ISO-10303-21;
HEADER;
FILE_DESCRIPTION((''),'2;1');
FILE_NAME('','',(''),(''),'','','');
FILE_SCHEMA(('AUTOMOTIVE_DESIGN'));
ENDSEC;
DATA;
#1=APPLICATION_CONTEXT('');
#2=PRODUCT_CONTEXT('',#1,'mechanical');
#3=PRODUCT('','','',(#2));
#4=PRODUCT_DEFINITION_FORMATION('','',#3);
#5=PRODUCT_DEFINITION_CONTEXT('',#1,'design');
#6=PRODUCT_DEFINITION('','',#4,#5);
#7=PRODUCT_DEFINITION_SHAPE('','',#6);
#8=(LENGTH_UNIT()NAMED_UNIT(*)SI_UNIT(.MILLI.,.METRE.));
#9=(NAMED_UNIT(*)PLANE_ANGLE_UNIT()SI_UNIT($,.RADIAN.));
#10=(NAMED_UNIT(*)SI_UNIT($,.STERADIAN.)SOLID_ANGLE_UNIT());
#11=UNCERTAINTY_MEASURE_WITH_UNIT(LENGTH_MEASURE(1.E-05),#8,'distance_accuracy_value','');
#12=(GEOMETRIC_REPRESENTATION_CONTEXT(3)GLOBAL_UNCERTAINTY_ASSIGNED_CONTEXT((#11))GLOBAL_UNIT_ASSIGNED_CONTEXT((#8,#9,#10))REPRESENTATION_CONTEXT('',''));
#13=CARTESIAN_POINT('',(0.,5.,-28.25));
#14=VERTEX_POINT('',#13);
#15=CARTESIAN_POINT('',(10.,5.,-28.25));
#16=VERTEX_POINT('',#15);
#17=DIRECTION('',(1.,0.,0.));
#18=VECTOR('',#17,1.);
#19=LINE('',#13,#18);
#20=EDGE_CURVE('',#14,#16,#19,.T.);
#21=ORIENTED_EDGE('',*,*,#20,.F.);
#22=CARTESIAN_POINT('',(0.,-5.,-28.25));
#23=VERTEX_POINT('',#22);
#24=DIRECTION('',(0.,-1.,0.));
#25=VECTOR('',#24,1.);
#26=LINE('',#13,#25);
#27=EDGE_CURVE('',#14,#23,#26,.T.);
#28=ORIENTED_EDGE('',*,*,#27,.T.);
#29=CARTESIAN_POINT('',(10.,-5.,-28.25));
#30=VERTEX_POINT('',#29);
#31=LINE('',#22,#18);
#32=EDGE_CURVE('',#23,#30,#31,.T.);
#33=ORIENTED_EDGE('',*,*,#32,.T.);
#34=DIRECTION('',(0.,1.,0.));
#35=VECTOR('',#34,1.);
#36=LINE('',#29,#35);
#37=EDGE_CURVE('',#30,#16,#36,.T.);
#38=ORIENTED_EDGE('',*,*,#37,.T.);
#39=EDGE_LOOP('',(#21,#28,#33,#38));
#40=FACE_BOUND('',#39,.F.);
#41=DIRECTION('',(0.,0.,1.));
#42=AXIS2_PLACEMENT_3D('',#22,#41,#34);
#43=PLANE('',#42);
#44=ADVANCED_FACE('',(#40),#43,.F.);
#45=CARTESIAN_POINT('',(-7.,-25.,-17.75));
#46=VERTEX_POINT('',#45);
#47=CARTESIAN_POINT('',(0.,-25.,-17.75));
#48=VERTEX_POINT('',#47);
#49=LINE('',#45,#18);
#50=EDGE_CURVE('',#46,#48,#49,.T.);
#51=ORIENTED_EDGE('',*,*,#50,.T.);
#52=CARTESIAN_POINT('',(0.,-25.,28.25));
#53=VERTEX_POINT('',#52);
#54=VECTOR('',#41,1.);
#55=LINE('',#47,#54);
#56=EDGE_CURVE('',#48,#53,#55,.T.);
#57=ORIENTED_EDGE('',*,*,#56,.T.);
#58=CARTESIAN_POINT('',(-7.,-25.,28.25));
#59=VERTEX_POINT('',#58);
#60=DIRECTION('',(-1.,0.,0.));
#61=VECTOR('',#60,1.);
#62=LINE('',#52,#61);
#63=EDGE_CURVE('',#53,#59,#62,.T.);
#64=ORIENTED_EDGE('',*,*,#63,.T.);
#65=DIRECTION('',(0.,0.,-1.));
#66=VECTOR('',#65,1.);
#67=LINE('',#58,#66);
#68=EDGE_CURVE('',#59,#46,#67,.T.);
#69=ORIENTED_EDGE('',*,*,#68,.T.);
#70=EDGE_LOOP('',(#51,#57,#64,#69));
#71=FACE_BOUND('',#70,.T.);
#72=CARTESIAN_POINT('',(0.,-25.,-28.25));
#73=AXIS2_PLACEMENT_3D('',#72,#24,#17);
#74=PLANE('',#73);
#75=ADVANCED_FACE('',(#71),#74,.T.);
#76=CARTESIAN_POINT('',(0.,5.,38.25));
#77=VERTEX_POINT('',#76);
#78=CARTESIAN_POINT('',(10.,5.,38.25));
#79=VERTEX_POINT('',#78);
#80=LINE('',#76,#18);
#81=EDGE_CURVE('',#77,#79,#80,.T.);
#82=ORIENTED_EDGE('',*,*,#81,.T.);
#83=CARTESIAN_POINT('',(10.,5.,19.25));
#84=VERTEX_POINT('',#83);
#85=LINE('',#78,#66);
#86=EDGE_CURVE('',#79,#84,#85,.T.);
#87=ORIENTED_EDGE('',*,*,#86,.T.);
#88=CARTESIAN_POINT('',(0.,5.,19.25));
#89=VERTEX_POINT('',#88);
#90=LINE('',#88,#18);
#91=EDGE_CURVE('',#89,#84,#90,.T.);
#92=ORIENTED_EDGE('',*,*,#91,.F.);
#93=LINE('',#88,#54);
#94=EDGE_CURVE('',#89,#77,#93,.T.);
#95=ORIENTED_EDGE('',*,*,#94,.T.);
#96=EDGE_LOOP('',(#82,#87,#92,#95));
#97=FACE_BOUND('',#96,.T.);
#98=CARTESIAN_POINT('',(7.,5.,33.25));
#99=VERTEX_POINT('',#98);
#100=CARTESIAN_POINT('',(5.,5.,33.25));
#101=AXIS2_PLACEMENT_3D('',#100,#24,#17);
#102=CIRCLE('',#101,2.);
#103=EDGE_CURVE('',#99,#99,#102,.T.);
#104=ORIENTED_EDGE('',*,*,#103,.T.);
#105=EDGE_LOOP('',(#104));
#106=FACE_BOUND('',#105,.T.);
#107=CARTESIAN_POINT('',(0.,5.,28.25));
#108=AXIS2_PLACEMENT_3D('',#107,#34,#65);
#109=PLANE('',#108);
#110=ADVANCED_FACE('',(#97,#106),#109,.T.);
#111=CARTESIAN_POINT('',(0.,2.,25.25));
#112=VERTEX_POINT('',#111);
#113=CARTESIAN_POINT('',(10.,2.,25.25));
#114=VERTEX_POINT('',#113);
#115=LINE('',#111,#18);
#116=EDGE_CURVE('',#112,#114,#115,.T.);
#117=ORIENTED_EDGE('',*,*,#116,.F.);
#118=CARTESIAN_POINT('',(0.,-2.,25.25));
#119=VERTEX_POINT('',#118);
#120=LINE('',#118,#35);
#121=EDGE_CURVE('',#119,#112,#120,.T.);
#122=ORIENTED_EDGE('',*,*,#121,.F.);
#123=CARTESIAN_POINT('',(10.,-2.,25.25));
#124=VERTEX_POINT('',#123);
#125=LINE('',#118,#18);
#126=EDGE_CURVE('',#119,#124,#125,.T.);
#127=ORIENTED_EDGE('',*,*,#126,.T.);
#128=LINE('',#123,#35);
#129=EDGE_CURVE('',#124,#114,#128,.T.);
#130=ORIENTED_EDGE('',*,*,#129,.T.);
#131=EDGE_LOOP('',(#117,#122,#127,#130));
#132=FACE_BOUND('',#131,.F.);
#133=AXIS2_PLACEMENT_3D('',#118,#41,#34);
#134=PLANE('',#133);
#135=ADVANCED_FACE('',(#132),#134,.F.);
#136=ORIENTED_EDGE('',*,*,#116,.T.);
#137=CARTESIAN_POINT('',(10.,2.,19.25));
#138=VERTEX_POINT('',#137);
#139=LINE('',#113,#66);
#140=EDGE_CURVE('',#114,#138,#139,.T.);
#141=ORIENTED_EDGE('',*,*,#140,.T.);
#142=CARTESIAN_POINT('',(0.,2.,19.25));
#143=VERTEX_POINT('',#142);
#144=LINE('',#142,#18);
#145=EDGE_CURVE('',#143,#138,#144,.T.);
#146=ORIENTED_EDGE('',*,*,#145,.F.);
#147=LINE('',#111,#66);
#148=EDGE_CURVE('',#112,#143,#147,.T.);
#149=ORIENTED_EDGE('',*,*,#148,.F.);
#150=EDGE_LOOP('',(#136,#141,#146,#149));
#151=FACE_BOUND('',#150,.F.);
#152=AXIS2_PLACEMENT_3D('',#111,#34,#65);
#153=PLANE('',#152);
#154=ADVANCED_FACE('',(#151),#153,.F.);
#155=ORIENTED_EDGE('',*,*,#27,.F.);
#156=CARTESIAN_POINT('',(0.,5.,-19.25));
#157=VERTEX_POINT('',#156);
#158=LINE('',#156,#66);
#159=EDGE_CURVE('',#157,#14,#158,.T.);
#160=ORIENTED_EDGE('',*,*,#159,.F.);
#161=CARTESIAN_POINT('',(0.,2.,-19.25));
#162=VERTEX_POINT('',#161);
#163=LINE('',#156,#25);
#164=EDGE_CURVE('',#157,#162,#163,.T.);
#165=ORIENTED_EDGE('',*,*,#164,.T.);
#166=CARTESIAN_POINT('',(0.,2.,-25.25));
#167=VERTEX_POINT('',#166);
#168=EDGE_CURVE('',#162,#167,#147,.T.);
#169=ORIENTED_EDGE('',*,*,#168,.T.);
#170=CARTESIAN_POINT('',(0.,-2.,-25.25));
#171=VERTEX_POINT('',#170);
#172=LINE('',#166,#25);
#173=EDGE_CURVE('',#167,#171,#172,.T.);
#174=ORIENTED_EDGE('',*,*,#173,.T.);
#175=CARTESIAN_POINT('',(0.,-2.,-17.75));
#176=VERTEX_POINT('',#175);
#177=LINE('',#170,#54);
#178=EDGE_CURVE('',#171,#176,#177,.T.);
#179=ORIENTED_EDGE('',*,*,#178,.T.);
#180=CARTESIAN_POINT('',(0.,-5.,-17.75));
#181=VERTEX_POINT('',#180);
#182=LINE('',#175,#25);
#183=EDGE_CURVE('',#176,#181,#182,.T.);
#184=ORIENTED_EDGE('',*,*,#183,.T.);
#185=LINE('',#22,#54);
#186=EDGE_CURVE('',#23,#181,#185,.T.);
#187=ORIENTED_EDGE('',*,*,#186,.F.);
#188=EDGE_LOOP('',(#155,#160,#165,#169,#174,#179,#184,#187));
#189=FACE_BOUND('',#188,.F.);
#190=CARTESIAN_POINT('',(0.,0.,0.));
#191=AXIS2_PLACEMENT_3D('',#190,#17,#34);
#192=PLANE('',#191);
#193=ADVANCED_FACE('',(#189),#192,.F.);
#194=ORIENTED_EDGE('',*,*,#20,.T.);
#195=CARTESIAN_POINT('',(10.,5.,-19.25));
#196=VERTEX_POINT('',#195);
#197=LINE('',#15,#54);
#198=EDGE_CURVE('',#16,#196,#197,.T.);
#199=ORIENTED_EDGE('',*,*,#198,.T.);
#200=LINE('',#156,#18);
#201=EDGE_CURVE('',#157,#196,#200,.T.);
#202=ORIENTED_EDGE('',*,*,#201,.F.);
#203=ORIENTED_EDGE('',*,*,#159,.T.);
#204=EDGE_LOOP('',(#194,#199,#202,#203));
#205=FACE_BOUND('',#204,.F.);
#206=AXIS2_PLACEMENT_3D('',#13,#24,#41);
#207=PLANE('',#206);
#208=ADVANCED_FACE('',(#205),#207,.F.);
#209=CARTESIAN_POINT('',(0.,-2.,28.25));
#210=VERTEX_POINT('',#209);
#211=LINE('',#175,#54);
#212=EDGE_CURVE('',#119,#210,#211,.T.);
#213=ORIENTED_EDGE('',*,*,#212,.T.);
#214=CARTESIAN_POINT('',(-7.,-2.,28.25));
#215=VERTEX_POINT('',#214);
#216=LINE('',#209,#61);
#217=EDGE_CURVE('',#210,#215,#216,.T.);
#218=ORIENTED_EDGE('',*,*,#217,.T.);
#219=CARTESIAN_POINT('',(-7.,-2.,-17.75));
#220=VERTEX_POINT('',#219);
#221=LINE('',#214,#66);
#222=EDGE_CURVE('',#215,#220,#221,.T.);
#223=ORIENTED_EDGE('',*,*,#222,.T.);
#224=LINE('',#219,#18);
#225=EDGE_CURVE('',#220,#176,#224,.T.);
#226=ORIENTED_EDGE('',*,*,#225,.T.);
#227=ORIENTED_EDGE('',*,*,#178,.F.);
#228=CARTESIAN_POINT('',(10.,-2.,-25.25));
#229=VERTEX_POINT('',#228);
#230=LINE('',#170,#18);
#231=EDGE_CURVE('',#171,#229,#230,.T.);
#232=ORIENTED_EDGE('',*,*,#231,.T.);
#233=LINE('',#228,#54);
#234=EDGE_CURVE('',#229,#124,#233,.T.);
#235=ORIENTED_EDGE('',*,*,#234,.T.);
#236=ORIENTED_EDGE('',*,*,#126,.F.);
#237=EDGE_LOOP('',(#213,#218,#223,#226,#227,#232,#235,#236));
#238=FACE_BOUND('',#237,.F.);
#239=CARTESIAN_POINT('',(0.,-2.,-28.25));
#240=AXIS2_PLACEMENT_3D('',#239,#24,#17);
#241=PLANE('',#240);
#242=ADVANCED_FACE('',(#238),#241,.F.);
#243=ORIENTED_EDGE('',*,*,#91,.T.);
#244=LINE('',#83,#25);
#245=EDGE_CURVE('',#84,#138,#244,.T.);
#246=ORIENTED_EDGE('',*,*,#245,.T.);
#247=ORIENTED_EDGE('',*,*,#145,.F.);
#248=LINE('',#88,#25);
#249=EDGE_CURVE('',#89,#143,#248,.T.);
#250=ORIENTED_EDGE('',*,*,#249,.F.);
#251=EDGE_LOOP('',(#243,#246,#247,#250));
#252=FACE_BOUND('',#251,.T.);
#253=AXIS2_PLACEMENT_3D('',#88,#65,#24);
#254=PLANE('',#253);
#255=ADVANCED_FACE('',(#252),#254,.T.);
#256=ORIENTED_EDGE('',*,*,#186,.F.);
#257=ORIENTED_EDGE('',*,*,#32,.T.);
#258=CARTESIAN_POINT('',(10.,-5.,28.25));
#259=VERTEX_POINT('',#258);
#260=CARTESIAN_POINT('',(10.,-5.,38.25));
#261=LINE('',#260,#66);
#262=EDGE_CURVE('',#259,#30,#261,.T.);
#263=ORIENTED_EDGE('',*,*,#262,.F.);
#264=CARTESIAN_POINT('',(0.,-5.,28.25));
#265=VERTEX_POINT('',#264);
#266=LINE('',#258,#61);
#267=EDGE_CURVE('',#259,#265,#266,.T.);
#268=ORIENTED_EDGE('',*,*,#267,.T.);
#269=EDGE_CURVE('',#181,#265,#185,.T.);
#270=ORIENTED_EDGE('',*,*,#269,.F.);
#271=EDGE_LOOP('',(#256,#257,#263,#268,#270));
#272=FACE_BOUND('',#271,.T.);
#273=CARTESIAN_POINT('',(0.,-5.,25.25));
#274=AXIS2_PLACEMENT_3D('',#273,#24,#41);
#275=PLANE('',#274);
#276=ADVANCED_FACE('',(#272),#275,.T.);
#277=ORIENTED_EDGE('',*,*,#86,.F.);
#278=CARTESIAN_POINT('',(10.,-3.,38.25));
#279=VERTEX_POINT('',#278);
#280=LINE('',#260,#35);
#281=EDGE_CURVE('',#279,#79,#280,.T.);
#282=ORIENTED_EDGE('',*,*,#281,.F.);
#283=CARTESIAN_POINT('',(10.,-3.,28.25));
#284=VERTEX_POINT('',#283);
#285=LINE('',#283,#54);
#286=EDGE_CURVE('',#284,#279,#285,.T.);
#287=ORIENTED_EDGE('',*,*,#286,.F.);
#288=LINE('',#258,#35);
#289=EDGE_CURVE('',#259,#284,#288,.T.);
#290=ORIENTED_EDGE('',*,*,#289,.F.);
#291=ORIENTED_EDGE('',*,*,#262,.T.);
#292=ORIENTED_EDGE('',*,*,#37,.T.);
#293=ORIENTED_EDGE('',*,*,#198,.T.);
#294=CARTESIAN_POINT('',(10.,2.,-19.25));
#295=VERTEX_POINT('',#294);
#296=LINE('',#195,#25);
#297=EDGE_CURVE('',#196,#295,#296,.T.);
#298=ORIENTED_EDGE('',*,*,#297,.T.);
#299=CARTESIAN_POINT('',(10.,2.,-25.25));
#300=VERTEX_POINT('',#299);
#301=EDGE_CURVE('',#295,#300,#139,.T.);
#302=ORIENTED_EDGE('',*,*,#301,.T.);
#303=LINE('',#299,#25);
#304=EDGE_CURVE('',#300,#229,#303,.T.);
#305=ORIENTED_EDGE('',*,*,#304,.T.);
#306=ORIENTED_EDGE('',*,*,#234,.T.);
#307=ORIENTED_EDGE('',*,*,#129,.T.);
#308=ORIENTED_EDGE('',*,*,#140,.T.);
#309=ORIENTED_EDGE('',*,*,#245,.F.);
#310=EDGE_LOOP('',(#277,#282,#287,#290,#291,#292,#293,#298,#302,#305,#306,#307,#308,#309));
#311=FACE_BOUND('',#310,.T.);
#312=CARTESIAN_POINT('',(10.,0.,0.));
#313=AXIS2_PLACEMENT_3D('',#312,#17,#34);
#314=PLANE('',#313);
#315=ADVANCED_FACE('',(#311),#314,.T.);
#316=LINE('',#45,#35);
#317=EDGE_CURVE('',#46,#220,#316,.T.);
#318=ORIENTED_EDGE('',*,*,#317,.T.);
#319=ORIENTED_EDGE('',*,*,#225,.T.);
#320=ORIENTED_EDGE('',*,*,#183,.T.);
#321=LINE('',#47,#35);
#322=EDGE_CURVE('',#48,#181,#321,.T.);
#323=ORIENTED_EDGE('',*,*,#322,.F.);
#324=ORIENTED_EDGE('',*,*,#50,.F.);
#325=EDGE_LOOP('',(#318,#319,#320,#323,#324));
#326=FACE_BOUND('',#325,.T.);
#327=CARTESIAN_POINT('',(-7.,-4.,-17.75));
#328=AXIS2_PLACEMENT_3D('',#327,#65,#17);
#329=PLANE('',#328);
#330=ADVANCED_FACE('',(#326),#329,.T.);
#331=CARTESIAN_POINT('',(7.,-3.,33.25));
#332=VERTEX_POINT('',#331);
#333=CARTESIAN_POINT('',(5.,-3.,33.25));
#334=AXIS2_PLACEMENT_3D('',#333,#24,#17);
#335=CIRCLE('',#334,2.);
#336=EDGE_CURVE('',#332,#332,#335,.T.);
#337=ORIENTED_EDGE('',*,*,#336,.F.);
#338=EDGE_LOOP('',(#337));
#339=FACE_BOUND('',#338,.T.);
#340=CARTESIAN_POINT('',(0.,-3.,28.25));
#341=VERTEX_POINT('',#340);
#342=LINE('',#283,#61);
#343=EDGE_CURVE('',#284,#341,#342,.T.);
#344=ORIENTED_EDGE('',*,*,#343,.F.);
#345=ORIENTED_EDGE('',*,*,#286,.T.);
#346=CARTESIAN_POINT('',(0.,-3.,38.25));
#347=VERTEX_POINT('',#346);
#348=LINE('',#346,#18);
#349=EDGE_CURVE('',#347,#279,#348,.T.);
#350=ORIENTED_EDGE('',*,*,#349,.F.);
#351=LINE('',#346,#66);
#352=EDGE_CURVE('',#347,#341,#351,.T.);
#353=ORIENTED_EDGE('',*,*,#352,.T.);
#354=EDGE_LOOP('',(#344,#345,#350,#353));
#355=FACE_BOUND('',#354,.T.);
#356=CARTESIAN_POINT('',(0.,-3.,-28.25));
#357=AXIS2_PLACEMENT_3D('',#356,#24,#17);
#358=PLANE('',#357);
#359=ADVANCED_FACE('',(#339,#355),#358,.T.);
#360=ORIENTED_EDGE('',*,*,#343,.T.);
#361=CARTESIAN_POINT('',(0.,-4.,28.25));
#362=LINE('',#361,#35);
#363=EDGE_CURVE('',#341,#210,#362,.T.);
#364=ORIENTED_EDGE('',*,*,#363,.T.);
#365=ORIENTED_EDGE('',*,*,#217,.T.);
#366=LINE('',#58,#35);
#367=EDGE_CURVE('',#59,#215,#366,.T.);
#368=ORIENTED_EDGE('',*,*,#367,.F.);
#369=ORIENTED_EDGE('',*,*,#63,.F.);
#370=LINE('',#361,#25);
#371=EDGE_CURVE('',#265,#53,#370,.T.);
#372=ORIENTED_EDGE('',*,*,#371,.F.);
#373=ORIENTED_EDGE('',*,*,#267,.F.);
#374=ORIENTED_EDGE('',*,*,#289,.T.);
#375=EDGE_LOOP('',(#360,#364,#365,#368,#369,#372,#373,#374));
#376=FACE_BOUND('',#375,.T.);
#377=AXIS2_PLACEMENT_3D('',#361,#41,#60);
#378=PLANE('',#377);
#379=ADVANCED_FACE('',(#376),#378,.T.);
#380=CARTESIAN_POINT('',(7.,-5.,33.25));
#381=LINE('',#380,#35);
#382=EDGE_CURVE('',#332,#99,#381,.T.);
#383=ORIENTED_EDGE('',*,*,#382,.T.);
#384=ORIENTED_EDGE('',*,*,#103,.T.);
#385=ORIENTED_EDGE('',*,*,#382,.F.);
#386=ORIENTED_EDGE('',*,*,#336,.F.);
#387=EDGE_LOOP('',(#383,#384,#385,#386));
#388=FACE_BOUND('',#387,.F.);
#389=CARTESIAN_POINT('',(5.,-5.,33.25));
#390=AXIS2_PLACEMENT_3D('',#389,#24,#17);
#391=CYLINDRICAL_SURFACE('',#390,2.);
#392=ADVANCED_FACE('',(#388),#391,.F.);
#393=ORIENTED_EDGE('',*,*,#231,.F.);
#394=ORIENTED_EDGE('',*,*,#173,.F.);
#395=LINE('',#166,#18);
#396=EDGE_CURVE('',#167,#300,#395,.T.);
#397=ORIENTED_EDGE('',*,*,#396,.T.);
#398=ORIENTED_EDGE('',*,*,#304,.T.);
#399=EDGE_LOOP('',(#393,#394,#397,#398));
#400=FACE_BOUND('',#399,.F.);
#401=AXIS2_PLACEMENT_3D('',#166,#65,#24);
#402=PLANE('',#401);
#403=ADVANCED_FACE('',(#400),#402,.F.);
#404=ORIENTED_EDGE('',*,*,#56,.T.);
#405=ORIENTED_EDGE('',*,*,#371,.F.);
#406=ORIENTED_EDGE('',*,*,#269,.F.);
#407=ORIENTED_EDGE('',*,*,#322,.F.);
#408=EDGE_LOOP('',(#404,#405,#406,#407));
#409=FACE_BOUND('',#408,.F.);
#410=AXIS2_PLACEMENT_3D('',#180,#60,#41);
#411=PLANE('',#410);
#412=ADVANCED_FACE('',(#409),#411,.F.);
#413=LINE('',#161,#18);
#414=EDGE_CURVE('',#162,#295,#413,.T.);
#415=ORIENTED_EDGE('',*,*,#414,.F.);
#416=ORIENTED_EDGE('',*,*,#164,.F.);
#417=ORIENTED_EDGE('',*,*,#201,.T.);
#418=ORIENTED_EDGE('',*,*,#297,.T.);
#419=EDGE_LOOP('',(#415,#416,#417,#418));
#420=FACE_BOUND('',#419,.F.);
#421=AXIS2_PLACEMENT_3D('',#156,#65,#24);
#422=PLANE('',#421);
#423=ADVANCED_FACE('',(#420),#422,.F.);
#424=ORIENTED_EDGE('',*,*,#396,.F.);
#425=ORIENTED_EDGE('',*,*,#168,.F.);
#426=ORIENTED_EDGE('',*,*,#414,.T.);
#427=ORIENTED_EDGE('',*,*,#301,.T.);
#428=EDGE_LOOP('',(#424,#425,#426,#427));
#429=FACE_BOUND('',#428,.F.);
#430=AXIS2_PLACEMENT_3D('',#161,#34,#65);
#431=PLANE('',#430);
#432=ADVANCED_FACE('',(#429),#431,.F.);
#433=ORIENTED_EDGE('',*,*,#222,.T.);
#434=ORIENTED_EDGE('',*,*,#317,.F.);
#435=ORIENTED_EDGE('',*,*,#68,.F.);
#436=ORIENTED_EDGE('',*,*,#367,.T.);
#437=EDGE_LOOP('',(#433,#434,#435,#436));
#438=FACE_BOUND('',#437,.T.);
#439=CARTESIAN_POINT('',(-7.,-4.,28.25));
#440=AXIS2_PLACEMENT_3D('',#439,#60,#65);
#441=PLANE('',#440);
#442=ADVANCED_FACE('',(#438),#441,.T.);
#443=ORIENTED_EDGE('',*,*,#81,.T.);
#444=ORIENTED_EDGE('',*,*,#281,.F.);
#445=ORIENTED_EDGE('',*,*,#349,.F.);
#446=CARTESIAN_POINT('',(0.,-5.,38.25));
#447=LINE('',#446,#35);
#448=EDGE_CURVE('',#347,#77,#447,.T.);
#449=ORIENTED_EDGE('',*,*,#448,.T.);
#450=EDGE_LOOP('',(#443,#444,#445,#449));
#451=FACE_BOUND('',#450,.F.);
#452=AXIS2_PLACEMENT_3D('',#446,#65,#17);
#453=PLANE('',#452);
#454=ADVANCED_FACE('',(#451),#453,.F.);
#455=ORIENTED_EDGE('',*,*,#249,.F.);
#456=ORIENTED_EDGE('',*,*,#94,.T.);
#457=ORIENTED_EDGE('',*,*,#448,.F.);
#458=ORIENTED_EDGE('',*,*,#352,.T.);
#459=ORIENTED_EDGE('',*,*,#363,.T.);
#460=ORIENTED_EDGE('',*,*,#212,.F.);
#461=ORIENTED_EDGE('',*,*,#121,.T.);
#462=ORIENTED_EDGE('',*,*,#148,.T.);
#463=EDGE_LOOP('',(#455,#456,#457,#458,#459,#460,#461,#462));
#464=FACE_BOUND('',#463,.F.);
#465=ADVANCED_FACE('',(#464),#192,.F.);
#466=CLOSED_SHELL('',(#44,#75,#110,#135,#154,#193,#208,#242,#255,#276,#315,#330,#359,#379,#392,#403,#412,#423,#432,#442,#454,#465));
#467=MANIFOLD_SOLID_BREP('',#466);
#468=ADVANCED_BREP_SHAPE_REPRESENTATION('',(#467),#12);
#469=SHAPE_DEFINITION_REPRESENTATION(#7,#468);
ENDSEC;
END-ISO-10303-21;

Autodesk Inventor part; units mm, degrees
ref_plane "YZ Plane" through (0, 0, 0) normal (1, 0, 0) x (0, 1, 0)
ref_plane "XZ Plane" through (0, 0, 0) normal (0, 1, 0) x (-1, 0, 0)
ref_plane "XY Plane" through (0, 0, 0) normal (0, 0, 1) x (1, 0, 0)
sketch "Эскиз1" plane through (0, 0, 0) normal (1, 0, 0) x (0, 1, 0)
  line L0 (-2, 25.25) -> (2, 25.25)
  line L1 (2, 25.25) -> (2, -25.25)
  line L2 (2, -25.25) -> (-2, -25.25)
  line L3 (-2, -25.25) -> (-2, 25.25)
  line L4 (-2, 25.25) -> (2, -25.25) construction
  line L5 (2, 25.25) -> (-2, -25.25) construction
  line L6 (2, 25.25) -> (5, 25.25)
  line L7 (5, 25.25) -> (5, 19.25)
  line L8 (5, 19.25) -> (2, 19.25)
  line L9 (2, 19.25) -> (2, 25.25)
  line L10 (2, -25.25) -> (5, -25.25)
  line L11 (5, -25.25) -> (5, -19.25)
  line L12 (5, -19.25) -> (2, -19.25)
  line L13 (2, -19.25) -> (2, -25.25)
  line L14 (5, 25.25) -> (-5, 25.25)
  line L15 (-5, 25.25) -> (-5, 28.25)
  line L16 (-5, 28.25) -> (5, 28.25)
  line L17 (5, 28.25) -> (5, 25.25)
  line L18 (5, -25.25) -> (-5, -25.25)
  line L19 (-5, -25.25) -> (-5, -28.25)
  line L20 (-5, -28.25) -> (5, -28.25)
  line L21 (5, -28.25) -> (5, -25.25)
  line L22 (-5, 28.25) -> (-2, 28.25)
  line L23 (-2, 28.25) -> (-2, -28.25)
  line L24 (-2, -28.25) -> (-5, -28.25)
  line L25 (-5, -28.25) -> (-5, 28.25)
  point P0 (0, 0)
  dimension "d0" = 4
  dimension "d1" = 50.5
  dimension "d2" = 3
  dimension "d3" = 6
  dimension "d4" = 3
  dimension "d5" = 6
  dimension "d6" = 10
  dimension "d7" = 10
  dimension "d8" = 3
  dimension "d9" = 3
extrude "Выдавливание1" add sketch "Эскиз1" along normal blind 10 contours L23 L16 L17 L6 L0 | L3 L18 L25 L14 | L14 L15 L16 L23 | L6 L7 L8 L1 | L23 L20 L19 L18 | L2 L10 L21 L20 L23 | L1 L12 L11 L10
sketch "Эскиз2" plane through (0, -5, -28.25) normal (0, -1, 0) x (1, 0, 0)
  line L0 (10, 47.5) -> (10, 56.5) projected
  line L1 (10, 56.5) -> (0, 56.5)
  line L2 (0, 56.5) -> (0, 66.5)
  line L3 (0, 66.5) -> (10, 66.5)
  line L4 (10, 66.5) -> (10, 56.5)
  circle A0 centre (5, 61.5) radius 2
  line L5 (0, 61.5) -> (3, 61.5)
  line L6 (7, 61.5) -> (10, 61.5)
  point P0 (0, 28.25)
  dimension "d14" = 10
  dimension "d15" = 10
  dimension "d29" = 4
  dimension "d30" = 5
  dimension "d31" = 5
extrude "Выдавливание2" add sketch "Эскиз2" against normal blind 10 contours L1 L2 L5 A0 L6 L4 | L6 A0 L5 L2 L3 L4
sketch "Эскиз3" plane through (0, -5, -28.25) normal (0, -1, 0) x (1, 0, 0)
  line L0 (0, 56.5) -> (10, 56.5) projected
  line L1 (0, 56.5) -> (-7, 56.5)
  line L2 (-7, 56.5) -> (-7, 10.5)
  line L3 (-7, 10.5) -> (0, 10.5)
  line L4 (0, 10.5) -> (0, 56.5)
  point P0 (0, 28.25)
  dimension "d21" = 7
extrude "Выдавливание3" add sketch "Эскиз3" along normal blind 20 and the other way blind 1
sketch "Эскиз4" plane through (0, -5, -28.25) normal (0, -1, 0) x (1, 0, 0)
  line L0 (10, 47.5) -> (10, 56.5)
  line L1 (10, 56.5) -> (0, 56.5)
  line L2 (0, 56.5) -> (0, 66.5)
  line L3 (0, 66.5) -> (10, 66.5)
  line L4 (10, 66.5) -> (10, 56.5)
  circle A0 centre (5, 61.5) radius 2
  line L5 (0, 61.5) -> (3, 61.5)
  line L6 (7, 61.5) -> (10, 61.5)
  point P0 (0, 28.25)
  point P1 (0, 28.25)
  dimension "d32" = 10
  dimension "d33" = 10
  dimension "d34" = 4
  dimension "d35" = 5
  dimension "d36" = 5
extrude "Выдавливание4" cut sketch "Эскиз4" against normal blind 2 contours L1 L2 L5 A0 L6 L4 | L6 A0 L5 L2 L3 L4
move faces "Перенос1" translate (0, 2, 0) faces at (-2.3333, -4, -2.4167) (0, -11.6667, -2.4167)
properties part number "000.702 - Активный прижим" material "Пластик АБС"
